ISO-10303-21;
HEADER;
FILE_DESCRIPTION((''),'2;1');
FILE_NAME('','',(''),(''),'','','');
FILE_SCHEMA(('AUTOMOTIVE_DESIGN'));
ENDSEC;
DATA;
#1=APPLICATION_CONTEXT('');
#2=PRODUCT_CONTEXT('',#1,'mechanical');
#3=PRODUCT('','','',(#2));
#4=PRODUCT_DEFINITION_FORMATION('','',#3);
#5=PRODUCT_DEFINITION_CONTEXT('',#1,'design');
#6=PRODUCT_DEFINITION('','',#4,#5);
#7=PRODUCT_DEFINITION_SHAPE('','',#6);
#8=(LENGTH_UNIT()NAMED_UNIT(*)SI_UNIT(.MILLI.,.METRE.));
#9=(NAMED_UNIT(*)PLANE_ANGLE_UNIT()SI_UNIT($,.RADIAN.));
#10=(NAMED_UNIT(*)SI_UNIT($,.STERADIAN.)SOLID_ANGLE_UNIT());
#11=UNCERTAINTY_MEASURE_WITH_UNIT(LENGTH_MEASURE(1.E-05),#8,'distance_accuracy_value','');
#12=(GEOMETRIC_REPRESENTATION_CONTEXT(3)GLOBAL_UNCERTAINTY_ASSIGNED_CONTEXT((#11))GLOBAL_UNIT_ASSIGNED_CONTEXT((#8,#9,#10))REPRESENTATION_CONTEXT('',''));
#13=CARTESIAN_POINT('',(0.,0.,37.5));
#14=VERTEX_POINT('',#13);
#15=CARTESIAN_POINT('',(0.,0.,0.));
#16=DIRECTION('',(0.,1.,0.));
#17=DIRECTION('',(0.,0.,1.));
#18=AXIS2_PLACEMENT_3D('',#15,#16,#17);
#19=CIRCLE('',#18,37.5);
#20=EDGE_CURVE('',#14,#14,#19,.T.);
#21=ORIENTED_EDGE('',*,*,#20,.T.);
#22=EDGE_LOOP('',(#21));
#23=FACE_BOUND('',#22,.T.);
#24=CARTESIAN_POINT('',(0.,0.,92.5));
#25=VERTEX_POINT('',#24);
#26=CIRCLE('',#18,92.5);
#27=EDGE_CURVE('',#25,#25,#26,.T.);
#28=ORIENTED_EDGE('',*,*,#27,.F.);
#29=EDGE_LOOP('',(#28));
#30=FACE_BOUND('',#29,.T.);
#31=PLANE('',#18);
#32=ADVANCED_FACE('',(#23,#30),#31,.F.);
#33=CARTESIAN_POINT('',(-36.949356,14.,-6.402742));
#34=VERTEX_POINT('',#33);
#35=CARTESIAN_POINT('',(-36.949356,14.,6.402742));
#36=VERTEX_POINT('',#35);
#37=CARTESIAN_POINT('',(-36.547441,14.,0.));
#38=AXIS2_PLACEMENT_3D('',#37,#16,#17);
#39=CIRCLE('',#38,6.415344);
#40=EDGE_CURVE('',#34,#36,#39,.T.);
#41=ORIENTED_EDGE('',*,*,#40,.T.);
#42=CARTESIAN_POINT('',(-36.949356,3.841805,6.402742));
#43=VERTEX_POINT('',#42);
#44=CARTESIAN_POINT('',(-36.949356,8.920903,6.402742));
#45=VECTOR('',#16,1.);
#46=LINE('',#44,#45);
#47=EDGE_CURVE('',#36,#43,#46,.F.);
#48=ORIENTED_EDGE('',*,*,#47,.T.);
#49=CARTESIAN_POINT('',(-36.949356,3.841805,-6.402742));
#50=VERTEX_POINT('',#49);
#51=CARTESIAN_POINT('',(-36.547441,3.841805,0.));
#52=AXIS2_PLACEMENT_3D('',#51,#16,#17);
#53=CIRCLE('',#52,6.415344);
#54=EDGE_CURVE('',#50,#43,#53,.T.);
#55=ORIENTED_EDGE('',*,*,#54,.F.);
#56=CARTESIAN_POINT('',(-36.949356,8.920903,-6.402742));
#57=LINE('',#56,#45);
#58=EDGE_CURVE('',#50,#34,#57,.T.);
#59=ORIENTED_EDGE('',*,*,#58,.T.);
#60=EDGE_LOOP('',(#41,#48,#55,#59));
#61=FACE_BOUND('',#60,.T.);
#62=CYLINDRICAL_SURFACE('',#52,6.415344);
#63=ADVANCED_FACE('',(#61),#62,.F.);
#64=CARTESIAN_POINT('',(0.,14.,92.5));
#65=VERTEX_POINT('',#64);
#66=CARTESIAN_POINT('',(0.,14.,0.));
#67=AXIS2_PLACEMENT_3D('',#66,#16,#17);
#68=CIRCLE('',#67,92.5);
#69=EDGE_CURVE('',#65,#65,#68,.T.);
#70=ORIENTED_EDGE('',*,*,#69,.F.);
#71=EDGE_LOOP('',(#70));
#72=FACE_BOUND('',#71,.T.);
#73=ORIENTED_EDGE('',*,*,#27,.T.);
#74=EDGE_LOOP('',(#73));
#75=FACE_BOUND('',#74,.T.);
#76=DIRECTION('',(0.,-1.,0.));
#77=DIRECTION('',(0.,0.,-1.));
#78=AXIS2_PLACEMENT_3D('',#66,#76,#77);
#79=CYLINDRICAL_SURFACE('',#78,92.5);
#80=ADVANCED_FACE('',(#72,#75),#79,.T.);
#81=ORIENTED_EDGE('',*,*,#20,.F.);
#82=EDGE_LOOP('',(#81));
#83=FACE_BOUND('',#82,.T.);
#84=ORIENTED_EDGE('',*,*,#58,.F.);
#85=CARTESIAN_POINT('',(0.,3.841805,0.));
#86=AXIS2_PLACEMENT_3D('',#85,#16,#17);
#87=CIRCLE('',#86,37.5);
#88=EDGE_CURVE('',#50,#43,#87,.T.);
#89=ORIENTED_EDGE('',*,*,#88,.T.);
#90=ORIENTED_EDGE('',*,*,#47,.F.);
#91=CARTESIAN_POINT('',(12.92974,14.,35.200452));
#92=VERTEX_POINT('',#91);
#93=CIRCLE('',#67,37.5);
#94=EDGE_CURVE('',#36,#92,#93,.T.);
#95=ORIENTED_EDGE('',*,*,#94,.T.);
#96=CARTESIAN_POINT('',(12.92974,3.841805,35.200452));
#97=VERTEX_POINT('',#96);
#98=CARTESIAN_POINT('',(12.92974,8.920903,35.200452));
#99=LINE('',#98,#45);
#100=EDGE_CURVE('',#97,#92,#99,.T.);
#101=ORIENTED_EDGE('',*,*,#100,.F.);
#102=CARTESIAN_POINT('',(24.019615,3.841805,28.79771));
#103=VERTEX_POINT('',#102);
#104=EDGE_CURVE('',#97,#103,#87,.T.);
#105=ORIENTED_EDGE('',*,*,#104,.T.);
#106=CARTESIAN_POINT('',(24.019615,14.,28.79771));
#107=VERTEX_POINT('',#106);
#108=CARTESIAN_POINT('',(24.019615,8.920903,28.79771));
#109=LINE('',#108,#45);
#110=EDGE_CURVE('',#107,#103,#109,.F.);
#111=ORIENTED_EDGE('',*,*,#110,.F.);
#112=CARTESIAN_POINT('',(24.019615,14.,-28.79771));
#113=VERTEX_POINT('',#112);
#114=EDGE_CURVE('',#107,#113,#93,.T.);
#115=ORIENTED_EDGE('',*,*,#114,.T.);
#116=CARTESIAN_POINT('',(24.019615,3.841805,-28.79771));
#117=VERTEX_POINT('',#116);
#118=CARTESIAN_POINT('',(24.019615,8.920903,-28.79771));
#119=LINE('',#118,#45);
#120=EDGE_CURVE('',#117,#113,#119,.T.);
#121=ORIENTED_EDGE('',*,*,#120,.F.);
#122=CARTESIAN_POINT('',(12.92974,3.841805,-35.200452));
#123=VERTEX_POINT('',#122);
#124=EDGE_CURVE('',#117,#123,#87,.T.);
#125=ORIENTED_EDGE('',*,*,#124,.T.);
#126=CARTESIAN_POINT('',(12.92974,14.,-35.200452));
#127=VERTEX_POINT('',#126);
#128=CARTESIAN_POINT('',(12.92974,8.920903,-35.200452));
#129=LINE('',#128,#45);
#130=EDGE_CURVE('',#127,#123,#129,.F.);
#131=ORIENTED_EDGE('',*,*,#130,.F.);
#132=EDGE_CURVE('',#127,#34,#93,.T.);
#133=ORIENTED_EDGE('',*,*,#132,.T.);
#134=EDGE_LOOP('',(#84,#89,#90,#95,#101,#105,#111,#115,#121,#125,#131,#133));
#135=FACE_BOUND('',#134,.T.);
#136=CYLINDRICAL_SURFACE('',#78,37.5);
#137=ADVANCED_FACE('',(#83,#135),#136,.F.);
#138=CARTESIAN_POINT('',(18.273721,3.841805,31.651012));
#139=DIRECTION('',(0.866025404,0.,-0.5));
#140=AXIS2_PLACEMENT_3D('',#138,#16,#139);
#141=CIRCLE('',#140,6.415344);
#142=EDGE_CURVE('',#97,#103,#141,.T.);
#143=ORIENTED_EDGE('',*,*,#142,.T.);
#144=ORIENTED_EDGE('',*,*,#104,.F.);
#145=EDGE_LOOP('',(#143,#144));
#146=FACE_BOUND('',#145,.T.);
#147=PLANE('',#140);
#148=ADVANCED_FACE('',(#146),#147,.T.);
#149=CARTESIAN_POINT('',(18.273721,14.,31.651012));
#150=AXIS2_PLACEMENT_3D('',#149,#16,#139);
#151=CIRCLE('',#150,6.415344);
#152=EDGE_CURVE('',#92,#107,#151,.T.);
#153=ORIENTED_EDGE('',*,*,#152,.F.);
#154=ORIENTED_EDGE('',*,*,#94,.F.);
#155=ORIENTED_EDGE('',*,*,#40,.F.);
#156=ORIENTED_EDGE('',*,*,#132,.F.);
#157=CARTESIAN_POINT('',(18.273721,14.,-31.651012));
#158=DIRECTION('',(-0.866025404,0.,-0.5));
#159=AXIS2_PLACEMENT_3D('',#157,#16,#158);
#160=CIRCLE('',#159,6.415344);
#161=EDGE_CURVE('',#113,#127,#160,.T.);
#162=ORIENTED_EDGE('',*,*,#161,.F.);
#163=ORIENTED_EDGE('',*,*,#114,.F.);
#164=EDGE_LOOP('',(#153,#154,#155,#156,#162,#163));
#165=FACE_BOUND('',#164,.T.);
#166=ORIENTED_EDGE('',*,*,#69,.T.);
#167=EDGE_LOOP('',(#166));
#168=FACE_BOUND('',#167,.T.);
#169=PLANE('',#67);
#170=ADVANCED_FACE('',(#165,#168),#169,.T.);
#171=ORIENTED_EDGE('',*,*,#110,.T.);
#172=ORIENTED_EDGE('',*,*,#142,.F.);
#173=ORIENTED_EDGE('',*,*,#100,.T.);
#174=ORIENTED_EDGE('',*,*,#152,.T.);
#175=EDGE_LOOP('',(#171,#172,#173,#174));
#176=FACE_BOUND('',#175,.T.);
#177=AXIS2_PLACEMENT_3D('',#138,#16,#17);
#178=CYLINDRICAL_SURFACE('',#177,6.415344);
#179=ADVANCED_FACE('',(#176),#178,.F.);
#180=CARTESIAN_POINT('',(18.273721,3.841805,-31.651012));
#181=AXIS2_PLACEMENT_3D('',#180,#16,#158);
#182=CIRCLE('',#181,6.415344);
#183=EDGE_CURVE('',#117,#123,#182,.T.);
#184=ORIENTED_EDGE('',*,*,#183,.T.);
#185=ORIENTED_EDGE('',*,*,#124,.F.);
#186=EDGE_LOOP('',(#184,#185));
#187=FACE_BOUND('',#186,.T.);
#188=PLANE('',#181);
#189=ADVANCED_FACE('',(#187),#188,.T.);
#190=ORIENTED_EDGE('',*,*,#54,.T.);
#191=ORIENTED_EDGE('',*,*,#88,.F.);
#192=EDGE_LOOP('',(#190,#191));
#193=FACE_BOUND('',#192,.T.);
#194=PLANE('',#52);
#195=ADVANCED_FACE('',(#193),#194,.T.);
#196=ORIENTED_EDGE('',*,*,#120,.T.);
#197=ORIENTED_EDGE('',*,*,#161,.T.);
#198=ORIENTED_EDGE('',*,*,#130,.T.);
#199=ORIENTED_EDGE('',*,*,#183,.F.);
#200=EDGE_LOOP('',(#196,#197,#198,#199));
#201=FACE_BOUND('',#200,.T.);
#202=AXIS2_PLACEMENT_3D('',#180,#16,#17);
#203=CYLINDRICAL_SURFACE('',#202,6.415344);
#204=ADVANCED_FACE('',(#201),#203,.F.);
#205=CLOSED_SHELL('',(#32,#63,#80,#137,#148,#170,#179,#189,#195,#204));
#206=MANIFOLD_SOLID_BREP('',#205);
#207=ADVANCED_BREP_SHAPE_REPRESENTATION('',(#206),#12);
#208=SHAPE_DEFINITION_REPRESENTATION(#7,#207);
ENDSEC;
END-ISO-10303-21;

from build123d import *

# Parameters (mm, degrees)
SKETCH1_R           = 92.5
BOSS_EXTRUDE1_DEPTH = 14
SKETCH2_R           = 37.5
CUT_EXTRUDE1_DEPTH  = 132.561772563
SKETCH3_R           = 6.415344471
CUT_EXTRUDE2_DEPTH  = 10.158194545
CIRPATTERN1_COUNT   = 3


with BuildPart() as part:
    # Sketch1 → Boss-Extrude1 (new body)
    with BuildSketch(Plane(origin=(0, 0, 0), x_dir=(1, 0, 0), z_dir=(0, 1, 0))):
        Circle(SKETCH1_R)
    extrude(amount=BOSS_EXTRUDE1_DEPTH)

    # Sketch2 → Cut-Extrude1 (cut, through all)
    with BuildSketch(Plane(origin=(0, 0, 0), x_dir=(1, 0, 0), z_dir=(0, 1, 0))):
        Circle(SKETCH2_R)
    extrude(amount=CUT_EXTRUDE1_DEPTH, mode=Mode.SUBTRACT)

    # Sketch3 → Cut-Extrude2 (cut)
    with BuildSketch(Plane(origin=(0, 14, 0), x_dir=(1, 0, 0), z_dir=(0, 1, 0))):
        with Locations((-36.547441057, 0)):
            Circle(SKETCH3_R)
    cut_extrude2 = extrude(amount=-CUT_EXTRUDE2_DEPTH, mode=Mode.SUBTRACT)

    # CirPattern1: Cut-Extrude2 ×3 about axis
    cirpattern1_axis = Axis((0, 0, 0), (0, 1, 0))
    for i in range(1, CIRPATTERN1_COUNT):
        add(cut_extrude2.rotate(cirpattern1_axis, i * 360 / CIRPATTERN1_COUNT), mode=Mode.SUBTRACT)


solid = part.part
